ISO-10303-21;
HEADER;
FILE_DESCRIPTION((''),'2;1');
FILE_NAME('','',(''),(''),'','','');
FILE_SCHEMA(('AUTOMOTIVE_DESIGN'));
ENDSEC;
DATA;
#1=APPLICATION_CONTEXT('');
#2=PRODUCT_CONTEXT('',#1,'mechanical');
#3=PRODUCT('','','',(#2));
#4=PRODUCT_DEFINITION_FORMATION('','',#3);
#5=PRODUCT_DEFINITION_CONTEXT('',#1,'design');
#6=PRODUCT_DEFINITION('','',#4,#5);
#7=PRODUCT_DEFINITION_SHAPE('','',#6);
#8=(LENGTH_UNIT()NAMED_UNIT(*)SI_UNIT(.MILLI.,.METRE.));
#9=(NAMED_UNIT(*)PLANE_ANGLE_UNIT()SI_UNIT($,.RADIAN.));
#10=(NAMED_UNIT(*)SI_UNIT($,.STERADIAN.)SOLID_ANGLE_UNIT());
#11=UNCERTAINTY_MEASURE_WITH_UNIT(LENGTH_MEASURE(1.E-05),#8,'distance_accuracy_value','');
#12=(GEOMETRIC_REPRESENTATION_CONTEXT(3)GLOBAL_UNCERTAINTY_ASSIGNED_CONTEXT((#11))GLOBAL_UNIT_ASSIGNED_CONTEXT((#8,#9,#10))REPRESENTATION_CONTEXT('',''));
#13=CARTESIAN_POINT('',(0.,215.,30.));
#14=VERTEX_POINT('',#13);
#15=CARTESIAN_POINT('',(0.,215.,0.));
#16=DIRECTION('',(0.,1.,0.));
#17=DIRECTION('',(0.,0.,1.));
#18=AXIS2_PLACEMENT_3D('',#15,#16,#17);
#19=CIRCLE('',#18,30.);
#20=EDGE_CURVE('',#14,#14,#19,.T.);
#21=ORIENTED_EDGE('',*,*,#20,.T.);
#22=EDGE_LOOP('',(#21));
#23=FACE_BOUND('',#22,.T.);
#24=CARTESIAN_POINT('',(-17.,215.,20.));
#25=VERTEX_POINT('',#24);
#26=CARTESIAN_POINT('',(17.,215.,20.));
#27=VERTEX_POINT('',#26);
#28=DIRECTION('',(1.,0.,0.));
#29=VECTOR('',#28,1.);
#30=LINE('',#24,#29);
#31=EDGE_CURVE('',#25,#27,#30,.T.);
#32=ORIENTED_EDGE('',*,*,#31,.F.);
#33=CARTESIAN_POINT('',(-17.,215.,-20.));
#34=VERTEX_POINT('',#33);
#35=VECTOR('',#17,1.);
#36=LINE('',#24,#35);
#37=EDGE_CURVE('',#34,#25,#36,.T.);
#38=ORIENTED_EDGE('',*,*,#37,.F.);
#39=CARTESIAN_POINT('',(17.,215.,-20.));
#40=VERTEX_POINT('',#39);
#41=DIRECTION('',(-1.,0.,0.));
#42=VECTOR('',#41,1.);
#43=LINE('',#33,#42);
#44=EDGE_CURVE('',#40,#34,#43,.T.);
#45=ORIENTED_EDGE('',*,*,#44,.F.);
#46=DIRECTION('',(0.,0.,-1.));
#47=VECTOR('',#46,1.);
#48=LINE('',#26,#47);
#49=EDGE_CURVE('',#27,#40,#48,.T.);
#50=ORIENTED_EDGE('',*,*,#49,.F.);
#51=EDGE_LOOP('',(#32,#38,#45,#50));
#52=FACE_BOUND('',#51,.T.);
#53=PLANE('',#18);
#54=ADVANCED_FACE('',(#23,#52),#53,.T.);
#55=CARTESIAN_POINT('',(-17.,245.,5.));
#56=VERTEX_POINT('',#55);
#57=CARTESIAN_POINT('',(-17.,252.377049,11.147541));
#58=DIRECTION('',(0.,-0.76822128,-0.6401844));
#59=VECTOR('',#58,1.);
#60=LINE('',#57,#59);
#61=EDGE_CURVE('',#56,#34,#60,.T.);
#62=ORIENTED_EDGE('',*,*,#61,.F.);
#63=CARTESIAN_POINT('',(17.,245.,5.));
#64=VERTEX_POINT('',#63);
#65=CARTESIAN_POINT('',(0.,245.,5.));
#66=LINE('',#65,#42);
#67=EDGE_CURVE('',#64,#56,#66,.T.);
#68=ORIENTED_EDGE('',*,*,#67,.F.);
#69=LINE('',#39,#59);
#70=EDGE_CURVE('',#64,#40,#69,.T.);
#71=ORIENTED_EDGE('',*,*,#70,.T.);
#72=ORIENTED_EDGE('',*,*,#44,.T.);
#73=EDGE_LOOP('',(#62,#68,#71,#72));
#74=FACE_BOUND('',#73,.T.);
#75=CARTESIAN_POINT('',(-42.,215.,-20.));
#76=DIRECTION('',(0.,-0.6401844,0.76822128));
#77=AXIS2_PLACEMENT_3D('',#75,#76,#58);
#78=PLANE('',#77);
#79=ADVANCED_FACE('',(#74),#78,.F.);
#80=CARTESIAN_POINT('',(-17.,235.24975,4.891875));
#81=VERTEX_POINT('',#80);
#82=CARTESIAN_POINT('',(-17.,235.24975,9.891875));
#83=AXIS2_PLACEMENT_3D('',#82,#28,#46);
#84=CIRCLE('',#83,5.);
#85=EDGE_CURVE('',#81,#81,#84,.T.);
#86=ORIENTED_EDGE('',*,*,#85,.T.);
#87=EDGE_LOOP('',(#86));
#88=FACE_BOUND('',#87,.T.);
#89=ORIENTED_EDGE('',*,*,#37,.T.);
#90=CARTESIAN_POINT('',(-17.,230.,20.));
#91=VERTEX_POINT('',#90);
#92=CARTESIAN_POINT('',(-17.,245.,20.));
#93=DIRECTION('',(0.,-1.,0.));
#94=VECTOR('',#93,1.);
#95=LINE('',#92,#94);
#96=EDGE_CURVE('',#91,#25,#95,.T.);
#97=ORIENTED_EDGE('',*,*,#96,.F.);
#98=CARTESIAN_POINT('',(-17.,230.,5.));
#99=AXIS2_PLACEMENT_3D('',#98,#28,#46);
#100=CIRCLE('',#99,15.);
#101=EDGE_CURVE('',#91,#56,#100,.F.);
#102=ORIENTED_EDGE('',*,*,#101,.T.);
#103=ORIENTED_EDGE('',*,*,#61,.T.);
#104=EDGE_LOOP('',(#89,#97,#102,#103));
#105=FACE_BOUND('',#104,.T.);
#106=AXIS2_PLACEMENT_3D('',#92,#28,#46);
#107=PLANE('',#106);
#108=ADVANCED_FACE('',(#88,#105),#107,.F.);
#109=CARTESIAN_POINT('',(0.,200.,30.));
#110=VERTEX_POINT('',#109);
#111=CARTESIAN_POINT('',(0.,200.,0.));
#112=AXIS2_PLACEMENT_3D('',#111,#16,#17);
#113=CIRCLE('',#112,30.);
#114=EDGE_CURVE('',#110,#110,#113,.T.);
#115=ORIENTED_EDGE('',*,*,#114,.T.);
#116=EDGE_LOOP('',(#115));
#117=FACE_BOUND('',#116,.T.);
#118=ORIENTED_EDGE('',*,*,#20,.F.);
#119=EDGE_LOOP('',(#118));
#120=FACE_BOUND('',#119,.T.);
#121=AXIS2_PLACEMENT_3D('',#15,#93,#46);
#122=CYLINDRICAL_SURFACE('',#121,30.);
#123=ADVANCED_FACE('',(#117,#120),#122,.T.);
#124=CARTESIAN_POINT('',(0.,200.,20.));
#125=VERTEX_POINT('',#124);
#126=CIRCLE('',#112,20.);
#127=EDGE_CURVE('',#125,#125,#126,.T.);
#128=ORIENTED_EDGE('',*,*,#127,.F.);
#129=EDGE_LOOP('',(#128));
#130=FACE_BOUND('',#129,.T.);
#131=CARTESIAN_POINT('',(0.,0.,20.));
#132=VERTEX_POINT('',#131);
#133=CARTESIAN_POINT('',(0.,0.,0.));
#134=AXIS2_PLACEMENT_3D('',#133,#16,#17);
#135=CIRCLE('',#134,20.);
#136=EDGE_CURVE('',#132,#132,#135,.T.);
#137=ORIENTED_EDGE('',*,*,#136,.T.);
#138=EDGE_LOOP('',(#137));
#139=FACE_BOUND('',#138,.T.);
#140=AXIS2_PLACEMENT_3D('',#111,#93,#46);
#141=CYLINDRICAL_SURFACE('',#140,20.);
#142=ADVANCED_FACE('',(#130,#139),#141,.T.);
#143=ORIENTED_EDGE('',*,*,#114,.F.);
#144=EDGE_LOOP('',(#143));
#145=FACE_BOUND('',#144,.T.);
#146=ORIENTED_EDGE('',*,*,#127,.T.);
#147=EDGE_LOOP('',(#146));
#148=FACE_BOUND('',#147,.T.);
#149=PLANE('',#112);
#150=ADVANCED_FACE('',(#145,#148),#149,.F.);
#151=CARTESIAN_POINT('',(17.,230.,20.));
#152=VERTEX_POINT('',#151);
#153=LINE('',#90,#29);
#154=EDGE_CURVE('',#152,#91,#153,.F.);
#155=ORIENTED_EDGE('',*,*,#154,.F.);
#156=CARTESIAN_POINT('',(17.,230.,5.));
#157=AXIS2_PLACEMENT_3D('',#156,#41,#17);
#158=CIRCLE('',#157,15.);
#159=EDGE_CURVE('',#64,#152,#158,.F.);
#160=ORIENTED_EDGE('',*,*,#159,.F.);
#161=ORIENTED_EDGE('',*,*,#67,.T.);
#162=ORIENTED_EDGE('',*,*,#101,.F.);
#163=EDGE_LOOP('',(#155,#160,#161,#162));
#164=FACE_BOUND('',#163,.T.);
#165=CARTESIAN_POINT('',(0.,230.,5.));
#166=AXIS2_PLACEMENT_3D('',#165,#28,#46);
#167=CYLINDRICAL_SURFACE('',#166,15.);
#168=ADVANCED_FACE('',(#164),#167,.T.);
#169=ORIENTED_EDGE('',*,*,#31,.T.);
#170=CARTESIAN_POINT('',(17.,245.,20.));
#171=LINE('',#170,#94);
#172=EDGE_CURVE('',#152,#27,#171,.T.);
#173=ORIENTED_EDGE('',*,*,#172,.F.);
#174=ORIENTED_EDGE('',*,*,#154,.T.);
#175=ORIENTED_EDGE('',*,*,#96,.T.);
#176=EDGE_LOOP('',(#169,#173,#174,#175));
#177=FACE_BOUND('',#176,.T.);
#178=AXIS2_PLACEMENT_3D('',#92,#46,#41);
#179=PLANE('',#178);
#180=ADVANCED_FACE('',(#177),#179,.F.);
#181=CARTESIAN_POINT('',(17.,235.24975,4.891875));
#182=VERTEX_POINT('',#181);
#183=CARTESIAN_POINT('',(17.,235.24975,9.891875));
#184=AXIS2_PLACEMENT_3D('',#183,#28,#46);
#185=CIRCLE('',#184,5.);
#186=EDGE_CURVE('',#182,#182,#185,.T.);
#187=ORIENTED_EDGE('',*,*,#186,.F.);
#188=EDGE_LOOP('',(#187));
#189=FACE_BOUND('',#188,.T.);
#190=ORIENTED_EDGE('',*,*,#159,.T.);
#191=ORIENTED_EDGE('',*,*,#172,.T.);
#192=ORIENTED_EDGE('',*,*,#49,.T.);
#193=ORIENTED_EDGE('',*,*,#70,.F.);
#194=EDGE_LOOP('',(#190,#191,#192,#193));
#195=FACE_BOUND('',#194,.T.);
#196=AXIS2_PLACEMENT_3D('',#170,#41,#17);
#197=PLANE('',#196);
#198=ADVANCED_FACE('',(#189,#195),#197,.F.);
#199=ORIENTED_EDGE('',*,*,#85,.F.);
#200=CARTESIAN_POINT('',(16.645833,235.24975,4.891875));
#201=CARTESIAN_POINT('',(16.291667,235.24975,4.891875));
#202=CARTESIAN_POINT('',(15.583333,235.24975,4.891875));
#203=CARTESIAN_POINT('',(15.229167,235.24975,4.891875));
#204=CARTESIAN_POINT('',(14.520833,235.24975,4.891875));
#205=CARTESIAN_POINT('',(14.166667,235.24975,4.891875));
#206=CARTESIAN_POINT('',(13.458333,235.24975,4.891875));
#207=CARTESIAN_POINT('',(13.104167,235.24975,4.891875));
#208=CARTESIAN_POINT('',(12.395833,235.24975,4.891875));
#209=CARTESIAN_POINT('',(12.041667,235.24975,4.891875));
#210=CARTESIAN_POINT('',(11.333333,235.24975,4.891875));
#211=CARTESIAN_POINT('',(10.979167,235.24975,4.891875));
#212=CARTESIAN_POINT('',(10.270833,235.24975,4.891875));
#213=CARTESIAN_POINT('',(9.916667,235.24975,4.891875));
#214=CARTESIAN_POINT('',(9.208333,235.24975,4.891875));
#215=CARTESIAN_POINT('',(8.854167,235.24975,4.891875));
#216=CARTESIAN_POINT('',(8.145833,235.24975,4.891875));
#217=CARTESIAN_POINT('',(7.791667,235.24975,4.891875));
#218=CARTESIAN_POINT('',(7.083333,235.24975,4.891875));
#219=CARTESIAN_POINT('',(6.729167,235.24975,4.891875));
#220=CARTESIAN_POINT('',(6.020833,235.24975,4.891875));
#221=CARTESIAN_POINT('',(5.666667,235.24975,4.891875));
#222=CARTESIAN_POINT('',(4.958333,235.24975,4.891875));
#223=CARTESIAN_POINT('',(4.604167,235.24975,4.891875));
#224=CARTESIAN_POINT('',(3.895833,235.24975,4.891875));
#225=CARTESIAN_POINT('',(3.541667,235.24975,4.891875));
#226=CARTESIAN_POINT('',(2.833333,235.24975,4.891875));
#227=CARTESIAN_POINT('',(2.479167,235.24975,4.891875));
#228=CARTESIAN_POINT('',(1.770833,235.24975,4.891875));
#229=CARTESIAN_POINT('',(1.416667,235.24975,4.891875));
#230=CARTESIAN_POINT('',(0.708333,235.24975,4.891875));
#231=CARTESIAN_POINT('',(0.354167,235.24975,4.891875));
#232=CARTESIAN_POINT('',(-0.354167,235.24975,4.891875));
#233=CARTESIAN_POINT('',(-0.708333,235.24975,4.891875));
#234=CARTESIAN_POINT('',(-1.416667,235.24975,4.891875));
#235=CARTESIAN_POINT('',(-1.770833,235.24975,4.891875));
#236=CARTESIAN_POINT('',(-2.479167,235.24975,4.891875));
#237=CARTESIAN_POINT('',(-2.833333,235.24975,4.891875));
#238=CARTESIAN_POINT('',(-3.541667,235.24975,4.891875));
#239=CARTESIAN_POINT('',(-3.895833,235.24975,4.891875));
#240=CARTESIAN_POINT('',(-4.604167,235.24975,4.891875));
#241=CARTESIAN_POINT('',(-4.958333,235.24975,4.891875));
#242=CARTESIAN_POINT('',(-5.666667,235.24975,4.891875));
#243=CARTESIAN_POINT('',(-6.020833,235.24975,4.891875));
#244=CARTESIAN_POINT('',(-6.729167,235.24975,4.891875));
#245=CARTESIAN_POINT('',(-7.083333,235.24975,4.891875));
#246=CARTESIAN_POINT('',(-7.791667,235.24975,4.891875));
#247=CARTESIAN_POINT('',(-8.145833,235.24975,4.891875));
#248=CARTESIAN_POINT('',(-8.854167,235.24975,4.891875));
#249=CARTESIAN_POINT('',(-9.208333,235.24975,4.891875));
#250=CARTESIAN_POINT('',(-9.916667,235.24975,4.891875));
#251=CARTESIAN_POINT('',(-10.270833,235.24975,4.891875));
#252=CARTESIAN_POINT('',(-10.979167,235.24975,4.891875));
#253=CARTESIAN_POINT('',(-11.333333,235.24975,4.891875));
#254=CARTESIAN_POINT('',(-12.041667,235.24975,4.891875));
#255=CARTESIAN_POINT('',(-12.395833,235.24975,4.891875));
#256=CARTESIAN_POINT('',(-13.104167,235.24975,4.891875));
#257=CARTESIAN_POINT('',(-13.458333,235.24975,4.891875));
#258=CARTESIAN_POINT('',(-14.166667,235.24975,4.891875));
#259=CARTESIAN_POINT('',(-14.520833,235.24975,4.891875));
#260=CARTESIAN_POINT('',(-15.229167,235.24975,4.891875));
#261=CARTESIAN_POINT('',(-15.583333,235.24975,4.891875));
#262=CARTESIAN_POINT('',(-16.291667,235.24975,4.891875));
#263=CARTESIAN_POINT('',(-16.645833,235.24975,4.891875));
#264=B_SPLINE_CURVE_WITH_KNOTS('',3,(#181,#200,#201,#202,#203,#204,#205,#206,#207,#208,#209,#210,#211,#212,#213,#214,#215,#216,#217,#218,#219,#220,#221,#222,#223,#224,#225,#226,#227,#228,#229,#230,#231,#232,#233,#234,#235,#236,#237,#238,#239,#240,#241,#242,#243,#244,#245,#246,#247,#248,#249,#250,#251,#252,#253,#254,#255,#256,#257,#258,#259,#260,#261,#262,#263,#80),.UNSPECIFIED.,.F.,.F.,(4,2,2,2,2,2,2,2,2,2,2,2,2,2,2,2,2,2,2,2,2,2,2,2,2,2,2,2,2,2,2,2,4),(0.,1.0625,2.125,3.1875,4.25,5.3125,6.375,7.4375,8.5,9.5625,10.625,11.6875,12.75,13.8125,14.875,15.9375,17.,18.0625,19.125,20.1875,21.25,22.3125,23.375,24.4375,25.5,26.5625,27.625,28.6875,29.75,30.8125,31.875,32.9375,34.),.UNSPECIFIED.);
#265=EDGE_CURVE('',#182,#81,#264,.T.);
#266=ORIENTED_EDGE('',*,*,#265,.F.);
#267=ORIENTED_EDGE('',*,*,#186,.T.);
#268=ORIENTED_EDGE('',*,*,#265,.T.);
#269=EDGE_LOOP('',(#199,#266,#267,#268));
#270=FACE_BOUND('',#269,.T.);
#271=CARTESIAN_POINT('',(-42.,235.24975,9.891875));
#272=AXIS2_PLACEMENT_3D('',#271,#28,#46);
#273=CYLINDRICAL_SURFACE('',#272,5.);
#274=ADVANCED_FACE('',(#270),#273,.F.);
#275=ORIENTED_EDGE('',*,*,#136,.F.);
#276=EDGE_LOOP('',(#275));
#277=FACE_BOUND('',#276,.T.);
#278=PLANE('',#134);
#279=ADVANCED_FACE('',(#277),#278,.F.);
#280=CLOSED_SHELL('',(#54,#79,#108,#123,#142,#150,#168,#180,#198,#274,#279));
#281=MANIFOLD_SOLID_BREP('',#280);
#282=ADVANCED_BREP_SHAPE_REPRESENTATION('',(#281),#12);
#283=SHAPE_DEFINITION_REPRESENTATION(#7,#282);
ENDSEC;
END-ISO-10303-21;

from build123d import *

# Parameters (mm, degrees)
SKETCH1_R           = 20
BOSS_EXTRUDE1_DEPTH = 200
SKETCH2_R           = 30
BOSS_EXTRUDE2_DEPTH = 15
SKETCH3_W           = 34
SKETCH3_H           = 40
BOSS_EXTRUDE3_DEPTH = 30
CUT_EXTRUDE1_DEPTH  = 59
FILLET1_R           = 15
SKETCH5_R           = 5
CUT_EXTRUDE2_DEPTH  = 59


with BuildPart() as part:
    # Sketch1 → Boss-Extrude1 (new body)
    with BuildSketch(Plane(origin=(0, 0, 0), x_dir=(1, 0, 0), z_dir=(0, 1, 0))):
        with Locations(Location((0, 0, 0), (0, 0, 270))):
            Circle(SKETCH1_R)
    extrude(amount=BOSS_EXTRUDE1_DEPTH)

    # Sketch2 → Boss-Extrude2 (add)
    with BuildSketch(Plane(origin=(0, 200, 0), x_dir=(1, 0, 0), z_dir=(0, 1, 0))):
        with Locations(Location((0, 0, 0), (0, 0, 270))):
            Circle(SKETCH2_R)
    extrude(amount=BOSS_EXTRUDE2_DEPTH)

    # Sketch3 → Boss-Extrude3 (add)
    with BuildSketch(Plane(origin=(0, 215, 0), x_dir=(1, 0, 0), z_dir=(0, 1, 0))):
        Rectangle(SKETCH3_W, SKETCH3_H)
    extrude(amount=BOSS_EXTRUDE3_DEPTH)

    # Sketch4 → Cut-Extrude1 (cut)
    with BuildSketch(Plane(origin=(17, 0, 0), x_dir=(0, 0, -1), z_dir=(1, 0, 0))):
        Polygon((20, 215), (-5, 245), (20, 245), align=None)
    extrude(amount=-CUT_EXTRUDE1_DEPTH, mode=Mode.SUBTRACT)

    # Fillet1
    fillet1_edges = [part.edges().sort_by_distance(p)[0] for p in [
        (0, 245, 20),
    ]]
    fillet(fillet1_edges, radius=FILLET1_R - 0.0001)  # a hair under: the kernel refuses the full size

    # Sketch5 → Cut-Extrude2 (cut)
    with BuildSketch(Plane(origin=(17, 0, 0), x_dir=(0, 0, -1), z_dir=(1, 0, 0))):
        with Locations((-9.891874818, 235.24975043)):
            Circle(SKETCH5_R)
    extrude(amount=-CUT_EXTRUDE2_DEPTH, mode=Mode.SUBTRACT)


solid = part.part
